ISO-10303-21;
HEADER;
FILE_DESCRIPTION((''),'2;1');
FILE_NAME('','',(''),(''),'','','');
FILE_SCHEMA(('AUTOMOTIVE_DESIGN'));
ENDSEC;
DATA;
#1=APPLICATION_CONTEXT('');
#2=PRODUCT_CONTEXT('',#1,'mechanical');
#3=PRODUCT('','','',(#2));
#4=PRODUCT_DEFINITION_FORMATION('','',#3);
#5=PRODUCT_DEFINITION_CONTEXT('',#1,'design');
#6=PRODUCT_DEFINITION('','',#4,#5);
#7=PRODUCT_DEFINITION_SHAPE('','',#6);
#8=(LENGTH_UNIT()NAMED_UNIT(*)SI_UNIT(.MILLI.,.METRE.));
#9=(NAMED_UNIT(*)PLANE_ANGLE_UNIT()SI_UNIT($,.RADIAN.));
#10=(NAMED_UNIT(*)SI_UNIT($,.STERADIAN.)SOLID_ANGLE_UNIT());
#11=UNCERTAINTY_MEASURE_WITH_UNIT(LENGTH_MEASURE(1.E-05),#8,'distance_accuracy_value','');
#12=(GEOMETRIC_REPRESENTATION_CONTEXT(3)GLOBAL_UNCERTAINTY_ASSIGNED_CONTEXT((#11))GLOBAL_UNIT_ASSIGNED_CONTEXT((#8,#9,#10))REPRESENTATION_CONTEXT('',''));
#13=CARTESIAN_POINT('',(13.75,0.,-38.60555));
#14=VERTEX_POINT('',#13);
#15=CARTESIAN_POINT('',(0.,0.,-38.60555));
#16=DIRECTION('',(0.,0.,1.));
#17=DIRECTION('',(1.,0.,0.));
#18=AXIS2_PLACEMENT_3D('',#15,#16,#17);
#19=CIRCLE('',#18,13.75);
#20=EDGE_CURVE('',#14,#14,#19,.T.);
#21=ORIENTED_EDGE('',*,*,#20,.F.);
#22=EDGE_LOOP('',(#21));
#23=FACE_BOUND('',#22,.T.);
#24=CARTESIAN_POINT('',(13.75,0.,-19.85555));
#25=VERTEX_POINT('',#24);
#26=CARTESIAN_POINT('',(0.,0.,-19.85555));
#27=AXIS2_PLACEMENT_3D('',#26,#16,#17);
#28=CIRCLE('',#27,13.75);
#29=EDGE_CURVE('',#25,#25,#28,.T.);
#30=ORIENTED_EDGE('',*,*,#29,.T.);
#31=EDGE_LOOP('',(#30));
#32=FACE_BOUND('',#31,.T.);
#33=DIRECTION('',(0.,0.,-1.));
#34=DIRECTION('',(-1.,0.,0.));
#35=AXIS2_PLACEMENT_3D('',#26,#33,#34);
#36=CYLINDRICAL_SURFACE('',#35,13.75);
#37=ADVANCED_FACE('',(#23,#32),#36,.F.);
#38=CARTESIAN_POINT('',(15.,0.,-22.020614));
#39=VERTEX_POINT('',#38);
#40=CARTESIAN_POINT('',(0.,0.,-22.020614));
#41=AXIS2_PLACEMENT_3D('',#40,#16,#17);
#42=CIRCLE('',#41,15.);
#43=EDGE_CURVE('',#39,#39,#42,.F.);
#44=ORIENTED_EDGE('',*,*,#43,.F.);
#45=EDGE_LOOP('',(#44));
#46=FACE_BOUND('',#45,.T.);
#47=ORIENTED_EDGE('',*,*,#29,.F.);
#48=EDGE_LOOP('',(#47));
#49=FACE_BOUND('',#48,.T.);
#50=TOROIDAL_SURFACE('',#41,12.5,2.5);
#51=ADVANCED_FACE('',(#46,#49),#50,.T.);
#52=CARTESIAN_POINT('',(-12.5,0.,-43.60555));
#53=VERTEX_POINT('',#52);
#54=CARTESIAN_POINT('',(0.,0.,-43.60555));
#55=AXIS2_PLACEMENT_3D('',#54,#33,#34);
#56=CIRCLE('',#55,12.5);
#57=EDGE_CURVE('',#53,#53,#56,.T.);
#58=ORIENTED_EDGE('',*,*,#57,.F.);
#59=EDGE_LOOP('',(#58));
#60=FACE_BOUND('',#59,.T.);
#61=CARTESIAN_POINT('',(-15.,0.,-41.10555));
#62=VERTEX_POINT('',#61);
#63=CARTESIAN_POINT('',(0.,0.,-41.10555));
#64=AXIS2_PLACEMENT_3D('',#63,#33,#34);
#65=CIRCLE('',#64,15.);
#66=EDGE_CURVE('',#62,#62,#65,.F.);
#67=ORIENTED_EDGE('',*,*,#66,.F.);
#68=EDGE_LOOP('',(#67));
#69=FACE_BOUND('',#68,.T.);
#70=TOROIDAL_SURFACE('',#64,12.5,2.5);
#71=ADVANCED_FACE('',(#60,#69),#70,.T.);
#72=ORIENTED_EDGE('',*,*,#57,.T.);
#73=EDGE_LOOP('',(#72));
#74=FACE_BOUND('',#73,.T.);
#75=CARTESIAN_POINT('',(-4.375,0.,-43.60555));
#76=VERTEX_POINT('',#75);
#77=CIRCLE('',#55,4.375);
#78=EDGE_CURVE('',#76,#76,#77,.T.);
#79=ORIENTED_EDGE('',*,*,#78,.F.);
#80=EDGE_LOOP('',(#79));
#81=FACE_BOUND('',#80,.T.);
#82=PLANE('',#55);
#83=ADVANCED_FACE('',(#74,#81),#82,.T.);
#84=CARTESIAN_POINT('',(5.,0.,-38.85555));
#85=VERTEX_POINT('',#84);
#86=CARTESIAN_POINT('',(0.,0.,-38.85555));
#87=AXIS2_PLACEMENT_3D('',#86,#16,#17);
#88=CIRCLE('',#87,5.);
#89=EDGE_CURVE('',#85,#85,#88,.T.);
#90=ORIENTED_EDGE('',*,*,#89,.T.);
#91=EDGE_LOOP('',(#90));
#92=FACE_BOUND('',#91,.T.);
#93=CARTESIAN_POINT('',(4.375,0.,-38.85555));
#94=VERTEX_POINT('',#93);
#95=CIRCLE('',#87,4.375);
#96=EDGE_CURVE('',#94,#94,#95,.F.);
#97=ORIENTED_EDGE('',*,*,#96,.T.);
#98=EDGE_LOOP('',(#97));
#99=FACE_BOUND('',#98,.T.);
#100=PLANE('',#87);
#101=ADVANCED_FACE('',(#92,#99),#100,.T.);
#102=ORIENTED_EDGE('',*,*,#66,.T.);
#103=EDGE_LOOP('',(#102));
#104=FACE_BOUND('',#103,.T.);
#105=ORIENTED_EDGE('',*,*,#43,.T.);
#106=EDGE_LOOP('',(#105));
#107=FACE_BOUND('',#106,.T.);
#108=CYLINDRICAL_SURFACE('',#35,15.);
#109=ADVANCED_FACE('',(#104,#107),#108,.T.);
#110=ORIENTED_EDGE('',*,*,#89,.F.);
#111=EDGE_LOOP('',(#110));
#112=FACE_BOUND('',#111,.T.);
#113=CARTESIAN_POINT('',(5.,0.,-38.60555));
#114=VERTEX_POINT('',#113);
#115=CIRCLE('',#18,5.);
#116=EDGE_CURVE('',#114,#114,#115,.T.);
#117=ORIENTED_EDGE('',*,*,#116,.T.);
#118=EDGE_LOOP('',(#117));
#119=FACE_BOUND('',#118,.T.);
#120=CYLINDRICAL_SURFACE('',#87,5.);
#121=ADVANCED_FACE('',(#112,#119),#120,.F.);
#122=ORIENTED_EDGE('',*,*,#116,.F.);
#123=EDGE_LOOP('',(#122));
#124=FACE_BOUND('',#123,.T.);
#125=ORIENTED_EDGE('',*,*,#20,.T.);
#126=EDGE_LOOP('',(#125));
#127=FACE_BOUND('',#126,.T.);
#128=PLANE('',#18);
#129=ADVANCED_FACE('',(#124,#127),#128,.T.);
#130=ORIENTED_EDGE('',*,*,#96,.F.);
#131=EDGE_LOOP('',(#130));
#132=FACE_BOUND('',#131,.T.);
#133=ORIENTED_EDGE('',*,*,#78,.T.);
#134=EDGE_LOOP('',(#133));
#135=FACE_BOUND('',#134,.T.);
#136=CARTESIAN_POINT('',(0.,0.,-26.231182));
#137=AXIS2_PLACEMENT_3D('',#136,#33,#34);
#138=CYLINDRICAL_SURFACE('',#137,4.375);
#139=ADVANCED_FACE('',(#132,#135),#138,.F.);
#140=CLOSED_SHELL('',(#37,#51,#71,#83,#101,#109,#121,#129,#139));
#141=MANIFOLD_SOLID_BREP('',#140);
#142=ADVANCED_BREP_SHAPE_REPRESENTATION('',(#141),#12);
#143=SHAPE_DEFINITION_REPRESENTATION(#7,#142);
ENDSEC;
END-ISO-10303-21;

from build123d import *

# Parameters (mm, degrees)
BOSS_EXTRU_1_START      = -50
ESQUISSE1_R             = 60
BOSS_EXTRU_1_DEPTH      = 80
COQUE1_T                = -5
BOSS_EXTRU_2_START      = 15
ESQUISSE2_R             = 60
BOSS_EXTRU_2_DEPTH      = 15
ESQUISSE3_R             = 17.5
ENL_V_MAT_EXTRU_1_DEPTH = 20
ESQUISSE4_R             = 20
ENL_V_MAT_EXTRU_2_DEPTH = 1
CONG_1_R                = 10
CONG_2_R                = 10
ECHELLE1_SCALE          = 0.25


with BuildPart() as part:
    # Esquisse1 → Boss.-Extru.1 (new body)
    with BuildSketch(Plane.XY.offset(BOSS_EXTRU_1_START)):
        Circle(ESQUISSE1_R)
    extrude(amount=BOSS_EXTRU_1_DEPTH)

    # Coque1
    coque1_openings = [part.faces().sort_by_distance(p)[0] for p in [
        (0, 0, 30),
    ]]
    offset(amount=COQUE1_T, openings=coque1_openings, kind=Kind.INTERSECTION)

    # Esquisse2 → Boss.-Extru.2 (add)
    with BuildSketch(Plane(origin=(0, 0, -50), x_dir=(-1, 0, 0), z_dir=(0, 0, -1)).offset(BOSS_EXTRU_2_START)):
        Circle(ESQUISSE2_R)
    extrude(amount=-BOSS_EXTRU_2_DEPTH)

    # Esquisse3 → Enlèv. mat.-Extru.1 (cut)
    with BuildSketch(Plane(origin=(0, 0, -65), x_dir=(-1, 0, 0), z_dir=(0, 0, -1))):
        Circle(ESQUISSE3_R)
    extrude(amount=-ENL_V_MAT_EXTRU_1_DEPTH, mode=Mode.SUBTRACT)

    # Esquisse4 → Enlèv. mat.-Extru.2 (cut)
    with BuildSketch(Plane.XY.offset(-45)):
        Circle(ESQUISSE4_R)
    extrude(amount=-ENL_V_MAT_EXTRU_2_DEPTH, mode=Mode.SUBTRACT)

    # Congé1
    cong_1_edges = [part.edges().sort_by_distance(p)[0] for p in [
        (60, 0, -65),
    ]]
    fillet(cong_1_edges, radius=CONG_1_R)

    # Congé2
    # the kernel refuses this fillet: 10 mm, written as the material it takes off along each edge
    with BuildSketch(Plane(origin=(0, 0, 30), x_dir=(1, 0, 0), z_dir=(0, -1, 0))) as cong_2_piece_1:
        with BuildLine():
            CenterArc((50, -8.660254038), CONG_2_R, 0, 60)
            Line((55, 0), (55.1, 0.173205081))
            ThreePointArc((55.1, 0.173205081), (57.5, 0.2), (60, 0.2))
            Line((60, 0.2), (60.2, 0))
            Line((60.2, 0), (60.2, -8.660254038))
            Line((60.2, -8.660254038), (60, -8.660254038))
        make_face()
    revolve(axis=Axis((0, 0, 30), (0, 0, 1)), mode=Mode.SUBTRACT)


with BuildPart() as part_1:
    # Echelle1: scaled about (0, 0, -36.474067002)
    add(part.part.scale(ECHELLE1_SCALE).moved(Location((0, 0, -27.355550251))))


solid = part_1.part
